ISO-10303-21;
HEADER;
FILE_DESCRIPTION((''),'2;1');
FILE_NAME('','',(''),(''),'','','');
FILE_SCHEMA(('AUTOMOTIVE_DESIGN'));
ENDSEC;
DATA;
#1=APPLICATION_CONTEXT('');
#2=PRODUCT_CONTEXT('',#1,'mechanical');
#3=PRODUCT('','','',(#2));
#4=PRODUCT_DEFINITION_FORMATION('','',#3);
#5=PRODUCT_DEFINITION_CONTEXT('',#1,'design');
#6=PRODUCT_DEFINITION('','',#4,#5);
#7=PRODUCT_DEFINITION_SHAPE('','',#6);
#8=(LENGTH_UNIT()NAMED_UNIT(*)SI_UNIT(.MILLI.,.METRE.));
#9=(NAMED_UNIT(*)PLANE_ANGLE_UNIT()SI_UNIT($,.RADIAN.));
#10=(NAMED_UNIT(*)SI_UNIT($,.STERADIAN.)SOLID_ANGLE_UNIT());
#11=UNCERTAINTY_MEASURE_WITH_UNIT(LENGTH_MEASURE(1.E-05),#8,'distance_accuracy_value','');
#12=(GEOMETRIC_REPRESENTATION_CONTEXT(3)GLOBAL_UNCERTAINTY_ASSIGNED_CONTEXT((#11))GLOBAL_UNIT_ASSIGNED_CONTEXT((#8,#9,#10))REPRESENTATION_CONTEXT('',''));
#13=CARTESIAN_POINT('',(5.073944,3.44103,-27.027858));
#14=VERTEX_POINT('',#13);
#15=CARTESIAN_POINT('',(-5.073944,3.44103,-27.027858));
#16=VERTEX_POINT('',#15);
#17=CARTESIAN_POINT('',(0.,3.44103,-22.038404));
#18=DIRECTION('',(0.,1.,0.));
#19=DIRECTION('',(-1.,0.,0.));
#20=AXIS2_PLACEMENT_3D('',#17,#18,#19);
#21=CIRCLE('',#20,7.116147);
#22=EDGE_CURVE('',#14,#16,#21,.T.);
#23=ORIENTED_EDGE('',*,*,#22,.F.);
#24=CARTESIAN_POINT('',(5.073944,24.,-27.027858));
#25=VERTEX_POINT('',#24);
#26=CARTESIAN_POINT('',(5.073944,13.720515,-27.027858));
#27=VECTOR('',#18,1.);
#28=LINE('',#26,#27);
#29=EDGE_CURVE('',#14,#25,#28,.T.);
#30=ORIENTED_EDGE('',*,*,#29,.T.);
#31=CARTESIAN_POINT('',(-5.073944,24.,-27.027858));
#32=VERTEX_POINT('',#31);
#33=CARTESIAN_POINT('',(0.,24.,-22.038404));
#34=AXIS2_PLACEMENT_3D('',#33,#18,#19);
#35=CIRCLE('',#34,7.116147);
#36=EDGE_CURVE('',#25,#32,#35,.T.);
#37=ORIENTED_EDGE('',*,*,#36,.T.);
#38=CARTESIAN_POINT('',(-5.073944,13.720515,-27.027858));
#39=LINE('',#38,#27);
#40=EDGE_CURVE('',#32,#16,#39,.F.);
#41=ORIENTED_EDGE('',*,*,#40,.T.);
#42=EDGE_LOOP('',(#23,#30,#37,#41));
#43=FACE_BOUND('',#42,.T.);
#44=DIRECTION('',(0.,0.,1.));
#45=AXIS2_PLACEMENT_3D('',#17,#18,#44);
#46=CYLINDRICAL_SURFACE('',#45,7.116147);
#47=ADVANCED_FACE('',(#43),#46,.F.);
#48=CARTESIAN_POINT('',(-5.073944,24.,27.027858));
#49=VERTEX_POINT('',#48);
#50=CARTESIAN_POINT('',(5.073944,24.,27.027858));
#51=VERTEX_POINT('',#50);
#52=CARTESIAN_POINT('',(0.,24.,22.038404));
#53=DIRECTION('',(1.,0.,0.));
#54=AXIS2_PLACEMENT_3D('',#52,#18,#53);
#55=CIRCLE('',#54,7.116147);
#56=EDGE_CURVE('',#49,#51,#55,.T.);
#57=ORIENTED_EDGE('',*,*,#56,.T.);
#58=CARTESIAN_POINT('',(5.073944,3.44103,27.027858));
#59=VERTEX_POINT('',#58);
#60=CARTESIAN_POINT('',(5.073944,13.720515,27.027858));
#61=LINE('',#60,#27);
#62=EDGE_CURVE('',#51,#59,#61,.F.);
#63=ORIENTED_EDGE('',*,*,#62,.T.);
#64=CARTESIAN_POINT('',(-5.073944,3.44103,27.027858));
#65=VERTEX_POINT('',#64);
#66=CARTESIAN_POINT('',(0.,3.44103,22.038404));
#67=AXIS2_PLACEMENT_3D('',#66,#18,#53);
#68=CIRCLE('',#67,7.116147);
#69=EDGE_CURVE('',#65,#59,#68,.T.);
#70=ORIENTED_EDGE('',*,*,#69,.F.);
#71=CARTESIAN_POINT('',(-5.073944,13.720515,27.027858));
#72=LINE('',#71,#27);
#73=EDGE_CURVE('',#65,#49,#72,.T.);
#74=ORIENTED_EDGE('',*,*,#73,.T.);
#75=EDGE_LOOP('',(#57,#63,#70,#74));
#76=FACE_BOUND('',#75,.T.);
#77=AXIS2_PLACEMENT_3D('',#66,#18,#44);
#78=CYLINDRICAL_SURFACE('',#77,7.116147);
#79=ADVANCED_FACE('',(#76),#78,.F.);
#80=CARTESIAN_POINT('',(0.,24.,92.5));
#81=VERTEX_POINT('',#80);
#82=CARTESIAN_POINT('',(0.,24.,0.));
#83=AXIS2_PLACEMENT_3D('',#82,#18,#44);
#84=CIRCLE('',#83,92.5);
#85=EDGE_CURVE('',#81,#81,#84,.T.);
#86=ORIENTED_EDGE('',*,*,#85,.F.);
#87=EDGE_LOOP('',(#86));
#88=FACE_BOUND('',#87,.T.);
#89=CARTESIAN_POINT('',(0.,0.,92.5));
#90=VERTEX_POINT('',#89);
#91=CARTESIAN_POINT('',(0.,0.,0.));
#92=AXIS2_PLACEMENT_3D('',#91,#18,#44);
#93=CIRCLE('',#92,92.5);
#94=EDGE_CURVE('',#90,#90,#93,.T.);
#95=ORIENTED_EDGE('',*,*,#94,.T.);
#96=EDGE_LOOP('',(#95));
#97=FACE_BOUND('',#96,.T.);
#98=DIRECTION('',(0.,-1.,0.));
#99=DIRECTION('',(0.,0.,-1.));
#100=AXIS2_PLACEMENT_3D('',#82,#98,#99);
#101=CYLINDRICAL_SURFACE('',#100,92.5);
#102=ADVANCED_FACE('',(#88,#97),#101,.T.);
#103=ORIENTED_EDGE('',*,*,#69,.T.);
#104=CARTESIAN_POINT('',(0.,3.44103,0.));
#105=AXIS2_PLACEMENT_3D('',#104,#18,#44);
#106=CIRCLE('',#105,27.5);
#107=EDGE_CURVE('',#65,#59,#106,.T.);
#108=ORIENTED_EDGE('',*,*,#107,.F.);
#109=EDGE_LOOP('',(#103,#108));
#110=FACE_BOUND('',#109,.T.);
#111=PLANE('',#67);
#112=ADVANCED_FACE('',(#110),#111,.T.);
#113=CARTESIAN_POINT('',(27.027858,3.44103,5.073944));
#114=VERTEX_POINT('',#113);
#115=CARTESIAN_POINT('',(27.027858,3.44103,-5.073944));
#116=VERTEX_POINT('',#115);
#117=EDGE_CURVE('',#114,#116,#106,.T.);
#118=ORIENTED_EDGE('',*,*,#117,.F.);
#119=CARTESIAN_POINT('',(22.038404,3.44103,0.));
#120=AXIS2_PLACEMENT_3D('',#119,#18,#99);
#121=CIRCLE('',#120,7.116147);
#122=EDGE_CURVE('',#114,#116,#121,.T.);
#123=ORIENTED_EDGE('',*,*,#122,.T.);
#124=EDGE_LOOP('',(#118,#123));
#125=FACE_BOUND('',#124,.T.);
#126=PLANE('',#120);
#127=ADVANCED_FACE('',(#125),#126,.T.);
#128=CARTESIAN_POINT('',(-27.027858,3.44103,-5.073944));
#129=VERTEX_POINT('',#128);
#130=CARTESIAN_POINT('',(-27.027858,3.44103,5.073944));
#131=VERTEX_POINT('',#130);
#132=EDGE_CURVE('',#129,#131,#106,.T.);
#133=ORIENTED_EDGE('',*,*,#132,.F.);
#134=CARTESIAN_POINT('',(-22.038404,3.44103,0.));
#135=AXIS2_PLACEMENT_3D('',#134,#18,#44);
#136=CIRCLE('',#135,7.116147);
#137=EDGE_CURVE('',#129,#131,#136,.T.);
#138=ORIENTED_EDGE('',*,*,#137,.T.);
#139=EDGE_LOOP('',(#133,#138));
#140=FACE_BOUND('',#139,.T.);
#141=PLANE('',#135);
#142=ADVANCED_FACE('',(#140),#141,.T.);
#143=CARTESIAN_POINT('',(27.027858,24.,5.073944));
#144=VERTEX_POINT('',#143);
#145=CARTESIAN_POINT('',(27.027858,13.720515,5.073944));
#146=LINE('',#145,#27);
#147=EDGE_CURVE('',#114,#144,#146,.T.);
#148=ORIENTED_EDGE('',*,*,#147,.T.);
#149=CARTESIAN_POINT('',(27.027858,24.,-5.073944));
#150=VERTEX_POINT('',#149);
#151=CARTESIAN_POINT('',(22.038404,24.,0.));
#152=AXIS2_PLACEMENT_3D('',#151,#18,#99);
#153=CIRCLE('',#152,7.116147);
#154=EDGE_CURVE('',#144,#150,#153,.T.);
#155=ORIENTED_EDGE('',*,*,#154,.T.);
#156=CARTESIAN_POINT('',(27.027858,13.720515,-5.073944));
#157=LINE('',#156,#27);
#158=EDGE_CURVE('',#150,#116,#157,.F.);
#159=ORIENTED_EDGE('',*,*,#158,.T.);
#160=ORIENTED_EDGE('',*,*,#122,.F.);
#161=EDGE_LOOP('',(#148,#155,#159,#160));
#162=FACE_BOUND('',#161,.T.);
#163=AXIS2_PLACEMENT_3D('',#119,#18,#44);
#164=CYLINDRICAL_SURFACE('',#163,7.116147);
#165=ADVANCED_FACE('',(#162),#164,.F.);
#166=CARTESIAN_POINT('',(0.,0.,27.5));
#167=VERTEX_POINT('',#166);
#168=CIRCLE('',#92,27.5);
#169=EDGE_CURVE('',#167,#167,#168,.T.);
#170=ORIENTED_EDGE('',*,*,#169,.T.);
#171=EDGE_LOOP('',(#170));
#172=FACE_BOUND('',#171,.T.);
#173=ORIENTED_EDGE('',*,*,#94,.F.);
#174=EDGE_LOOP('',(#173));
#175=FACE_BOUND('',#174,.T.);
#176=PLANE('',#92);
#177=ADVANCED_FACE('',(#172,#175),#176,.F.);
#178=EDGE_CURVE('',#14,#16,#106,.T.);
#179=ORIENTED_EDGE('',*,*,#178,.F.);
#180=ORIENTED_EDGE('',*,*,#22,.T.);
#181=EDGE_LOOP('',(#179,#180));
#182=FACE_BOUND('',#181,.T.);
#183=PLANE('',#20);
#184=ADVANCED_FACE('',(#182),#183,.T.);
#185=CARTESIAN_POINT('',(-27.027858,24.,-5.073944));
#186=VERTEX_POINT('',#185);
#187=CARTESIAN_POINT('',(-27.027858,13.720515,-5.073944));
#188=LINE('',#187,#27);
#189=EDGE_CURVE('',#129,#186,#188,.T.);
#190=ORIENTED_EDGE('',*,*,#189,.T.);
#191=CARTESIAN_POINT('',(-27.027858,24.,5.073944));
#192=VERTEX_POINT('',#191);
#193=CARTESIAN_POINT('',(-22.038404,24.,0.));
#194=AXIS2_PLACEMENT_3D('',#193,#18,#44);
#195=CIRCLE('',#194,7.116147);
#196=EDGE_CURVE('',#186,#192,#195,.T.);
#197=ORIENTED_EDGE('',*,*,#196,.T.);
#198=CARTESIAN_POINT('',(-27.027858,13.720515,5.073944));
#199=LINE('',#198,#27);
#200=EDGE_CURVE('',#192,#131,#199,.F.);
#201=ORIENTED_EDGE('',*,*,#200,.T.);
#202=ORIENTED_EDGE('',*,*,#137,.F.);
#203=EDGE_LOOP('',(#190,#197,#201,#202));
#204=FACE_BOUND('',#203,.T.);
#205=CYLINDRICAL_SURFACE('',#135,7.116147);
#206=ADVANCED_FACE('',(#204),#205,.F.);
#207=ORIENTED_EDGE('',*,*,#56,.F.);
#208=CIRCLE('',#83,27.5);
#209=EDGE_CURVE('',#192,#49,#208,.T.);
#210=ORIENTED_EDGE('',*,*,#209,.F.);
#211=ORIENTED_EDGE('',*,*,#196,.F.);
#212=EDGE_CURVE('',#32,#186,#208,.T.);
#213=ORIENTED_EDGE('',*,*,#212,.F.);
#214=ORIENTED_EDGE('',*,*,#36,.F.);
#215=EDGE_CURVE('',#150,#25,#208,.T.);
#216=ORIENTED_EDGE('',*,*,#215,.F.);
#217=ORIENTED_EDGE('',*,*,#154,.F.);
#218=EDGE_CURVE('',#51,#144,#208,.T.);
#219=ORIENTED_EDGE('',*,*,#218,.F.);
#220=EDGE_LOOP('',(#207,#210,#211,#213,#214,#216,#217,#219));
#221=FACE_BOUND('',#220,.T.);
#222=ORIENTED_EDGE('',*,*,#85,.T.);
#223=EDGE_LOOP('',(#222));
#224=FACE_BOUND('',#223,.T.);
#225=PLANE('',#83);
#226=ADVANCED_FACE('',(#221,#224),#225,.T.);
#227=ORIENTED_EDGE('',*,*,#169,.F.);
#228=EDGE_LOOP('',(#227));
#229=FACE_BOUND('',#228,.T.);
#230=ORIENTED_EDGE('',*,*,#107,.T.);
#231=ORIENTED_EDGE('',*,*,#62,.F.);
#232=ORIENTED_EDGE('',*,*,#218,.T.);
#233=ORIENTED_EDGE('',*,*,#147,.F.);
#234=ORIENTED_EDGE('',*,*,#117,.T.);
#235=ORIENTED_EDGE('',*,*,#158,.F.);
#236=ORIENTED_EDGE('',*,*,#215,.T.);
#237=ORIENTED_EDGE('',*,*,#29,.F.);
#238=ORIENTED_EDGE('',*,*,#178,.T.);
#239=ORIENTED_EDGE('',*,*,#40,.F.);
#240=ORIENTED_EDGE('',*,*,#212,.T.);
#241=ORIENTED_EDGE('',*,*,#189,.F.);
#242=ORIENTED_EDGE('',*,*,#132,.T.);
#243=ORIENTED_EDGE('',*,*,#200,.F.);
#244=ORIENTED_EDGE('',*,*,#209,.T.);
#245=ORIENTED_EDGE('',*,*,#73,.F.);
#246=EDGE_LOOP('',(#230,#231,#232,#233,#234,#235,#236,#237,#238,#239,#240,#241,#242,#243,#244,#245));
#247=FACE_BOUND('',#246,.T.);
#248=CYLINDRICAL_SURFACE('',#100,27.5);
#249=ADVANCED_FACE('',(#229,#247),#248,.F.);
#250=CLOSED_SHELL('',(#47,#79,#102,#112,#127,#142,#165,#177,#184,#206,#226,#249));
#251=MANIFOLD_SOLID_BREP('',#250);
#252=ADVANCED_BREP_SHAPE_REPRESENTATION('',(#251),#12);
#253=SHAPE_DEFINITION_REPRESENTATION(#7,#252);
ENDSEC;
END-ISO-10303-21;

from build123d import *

# Parameters (mm, degrees)
SKETCH1_R           = 92.5
BOSS_EXTRUDE1_DEPTH = 24
SKETCH2_R           = 27.5
CUT_EXTRUDE1_DEPTH  = 133.998120287
SKETCH3_R           = 7.116147283
CUT_EXTRUDE2_DEPTH  = 20.558970345
CIRPATTERN1_COUNT   = 4


with BuildPart() as part:
    # Sketch1 → Boss-Extrude1 (new body)
    with BuildSketch(Plane(origin=(0, 0, 0), x_dir=(1, 0, 0), z_dir=(0, 1, 0))):
        Circle(SKETCH1_R)
    extrude(amount=BOSS_EXTRUDE1_DEPTH)

    # Sketch2 → Cut-Extrude1 (cut, through all)
    with BuildSketch(Plane(origin=(0, 0, 0), x_dir=(1, 0, 0), z_dir=(0, 1, 0))):
        Circle(SKETCH2_R)
    extrude(amount=CUT_EXTRUDE1_DEPTH, mode=Mode.SUBTRACT)

    # Sketch3 → Cut-Extrude2 (cut)
    with BuildSketch(Plane(origin=(0, 24, 0), x_dir=(1, 0, 0), z_dir=(0, 1, 0))):
        with Locations((-22.038404359, 0)):
            Circle(SKETCH3_R)
    cut_extrude2 = extrude(amount=-CUT_EXTRUDE2_DEPTH, mode=Mode.SUBTRACT)

    # CirPattern1: Cut-Extrude2 ×4 about axis
    cirpattern1_axis = Axis((0, 0, 0), (0, 1, 0))
    for i in range(1, CIRPATTERN1_COUNT):
        add(cut_extrude2.rotate(cirpattern1_axis, i * 360 / CIRPATTERN1_COUNT), mode=Mode.SUBTRACT)


solid = part.part
